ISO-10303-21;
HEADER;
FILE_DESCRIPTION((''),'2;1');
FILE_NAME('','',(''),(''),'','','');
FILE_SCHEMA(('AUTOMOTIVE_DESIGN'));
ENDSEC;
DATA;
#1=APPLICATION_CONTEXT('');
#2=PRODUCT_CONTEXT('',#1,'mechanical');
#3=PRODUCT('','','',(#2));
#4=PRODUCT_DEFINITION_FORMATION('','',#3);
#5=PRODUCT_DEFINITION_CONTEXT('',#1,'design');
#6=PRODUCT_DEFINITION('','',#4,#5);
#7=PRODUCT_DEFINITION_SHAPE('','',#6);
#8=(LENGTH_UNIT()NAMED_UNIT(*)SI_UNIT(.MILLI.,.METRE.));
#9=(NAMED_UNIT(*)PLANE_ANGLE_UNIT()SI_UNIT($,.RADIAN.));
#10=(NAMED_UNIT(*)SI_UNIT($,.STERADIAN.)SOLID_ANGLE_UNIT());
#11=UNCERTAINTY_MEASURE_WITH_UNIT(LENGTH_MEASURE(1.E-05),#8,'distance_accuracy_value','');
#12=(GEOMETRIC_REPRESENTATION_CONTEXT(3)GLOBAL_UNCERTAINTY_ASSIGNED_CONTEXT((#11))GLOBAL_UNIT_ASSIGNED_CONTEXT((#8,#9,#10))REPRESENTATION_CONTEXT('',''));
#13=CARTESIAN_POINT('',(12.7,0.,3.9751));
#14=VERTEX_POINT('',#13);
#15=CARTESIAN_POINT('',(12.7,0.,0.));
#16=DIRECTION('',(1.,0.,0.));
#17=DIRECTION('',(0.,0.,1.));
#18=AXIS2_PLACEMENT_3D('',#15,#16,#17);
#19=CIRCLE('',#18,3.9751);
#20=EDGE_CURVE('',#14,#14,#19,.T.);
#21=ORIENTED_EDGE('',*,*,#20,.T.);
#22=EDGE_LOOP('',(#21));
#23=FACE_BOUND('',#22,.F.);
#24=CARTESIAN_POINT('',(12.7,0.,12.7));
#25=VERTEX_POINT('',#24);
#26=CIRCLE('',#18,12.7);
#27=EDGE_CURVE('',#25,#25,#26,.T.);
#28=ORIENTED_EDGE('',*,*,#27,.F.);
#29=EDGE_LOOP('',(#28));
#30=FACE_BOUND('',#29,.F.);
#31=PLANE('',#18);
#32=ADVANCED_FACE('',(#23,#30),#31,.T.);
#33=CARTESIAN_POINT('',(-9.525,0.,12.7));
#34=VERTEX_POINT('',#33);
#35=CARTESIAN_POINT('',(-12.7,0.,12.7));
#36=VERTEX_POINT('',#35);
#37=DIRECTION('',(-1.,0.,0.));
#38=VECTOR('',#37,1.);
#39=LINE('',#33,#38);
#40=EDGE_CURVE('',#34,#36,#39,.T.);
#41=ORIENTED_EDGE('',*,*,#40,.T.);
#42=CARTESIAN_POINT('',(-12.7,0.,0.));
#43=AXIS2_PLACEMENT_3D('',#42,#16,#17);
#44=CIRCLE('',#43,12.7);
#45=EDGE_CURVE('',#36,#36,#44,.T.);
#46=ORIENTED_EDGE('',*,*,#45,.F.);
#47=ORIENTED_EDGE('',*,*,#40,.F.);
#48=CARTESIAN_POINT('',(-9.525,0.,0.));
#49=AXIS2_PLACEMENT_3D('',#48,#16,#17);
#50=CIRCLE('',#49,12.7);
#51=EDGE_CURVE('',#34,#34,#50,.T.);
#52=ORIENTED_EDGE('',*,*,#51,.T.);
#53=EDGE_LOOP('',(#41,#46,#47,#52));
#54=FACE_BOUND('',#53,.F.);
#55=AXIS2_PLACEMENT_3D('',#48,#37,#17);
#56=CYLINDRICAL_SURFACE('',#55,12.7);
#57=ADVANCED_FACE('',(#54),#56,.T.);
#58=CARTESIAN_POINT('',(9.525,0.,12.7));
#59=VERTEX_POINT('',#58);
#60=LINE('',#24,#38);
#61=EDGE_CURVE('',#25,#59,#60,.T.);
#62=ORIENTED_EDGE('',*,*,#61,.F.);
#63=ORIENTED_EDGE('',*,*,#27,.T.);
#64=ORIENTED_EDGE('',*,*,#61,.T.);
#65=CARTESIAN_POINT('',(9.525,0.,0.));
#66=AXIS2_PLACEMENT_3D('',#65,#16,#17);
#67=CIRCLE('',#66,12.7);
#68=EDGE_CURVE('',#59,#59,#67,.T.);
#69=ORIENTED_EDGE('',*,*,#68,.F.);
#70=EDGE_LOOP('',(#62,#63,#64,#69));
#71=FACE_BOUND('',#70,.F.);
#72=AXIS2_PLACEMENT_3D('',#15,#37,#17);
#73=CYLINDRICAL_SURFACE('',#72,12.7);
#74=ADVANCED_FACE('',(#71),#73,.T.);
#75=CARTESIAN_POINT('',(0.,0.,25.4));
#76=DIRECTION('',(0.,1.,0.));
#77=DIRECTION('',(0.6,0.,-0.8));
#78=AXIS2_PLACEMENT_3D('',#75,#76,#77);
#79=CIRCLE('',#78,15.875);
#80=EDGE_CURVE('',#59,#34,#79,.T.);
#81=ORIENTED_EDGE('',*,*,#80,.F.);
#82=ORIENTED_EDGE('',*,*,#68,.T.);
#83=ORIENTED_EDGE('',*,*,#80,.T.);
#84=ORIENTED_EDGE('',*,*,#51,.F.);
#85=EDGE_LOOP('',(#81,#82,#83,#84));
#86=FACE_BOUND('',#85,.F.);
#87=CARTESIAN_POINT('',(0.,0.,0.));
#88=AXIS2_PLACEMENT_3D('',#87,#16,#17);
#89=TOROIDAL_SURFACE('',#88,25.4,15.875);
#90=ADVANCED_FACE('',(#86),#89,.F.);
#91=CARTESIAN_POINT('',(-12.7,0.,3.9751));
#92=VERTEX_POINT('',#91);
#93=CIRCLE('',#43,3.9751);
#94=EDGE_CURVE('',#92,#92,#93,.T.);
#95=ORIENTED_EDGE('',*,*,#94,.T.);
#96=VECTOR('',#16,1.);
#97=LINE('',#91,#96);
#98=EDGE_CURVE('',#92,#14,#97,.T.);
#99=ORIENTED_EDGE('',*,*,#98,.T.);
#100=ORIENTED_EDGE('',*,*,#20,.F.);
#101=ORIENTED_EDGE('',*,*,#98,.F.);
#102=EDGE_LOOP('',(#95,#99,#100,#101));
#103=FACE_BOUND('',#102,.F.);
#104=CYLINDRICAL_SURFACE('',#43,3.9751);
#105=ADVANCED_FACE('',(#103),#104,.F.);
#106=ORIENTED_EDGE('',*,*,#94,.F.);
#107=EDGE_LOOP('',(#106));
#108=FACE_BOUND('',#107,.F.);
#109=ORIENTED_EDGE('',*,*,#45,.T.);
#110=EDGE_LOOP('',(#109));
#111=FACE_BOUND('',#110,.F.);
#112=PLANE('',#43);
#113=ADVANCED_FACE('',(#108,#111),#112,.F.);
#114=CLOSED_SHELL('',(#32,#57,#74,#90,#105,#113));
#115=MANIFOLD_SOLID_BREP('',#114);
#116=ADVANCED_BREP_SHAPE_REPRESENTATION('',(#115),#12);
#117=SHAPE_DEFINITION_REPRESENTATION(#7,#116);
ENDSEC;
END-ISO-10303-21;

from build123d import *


# Not quite as in the source:
# - a feature names something its author has since deleted; it is built from what else it names


with BuildPart() as f1:
    # F0 (on Front) → F1 (revolve)
    with BuildSketch(Plane.XZ):
        with BuildLine():
            Line((-12.7, 12.7), (-12.7, 3.9751))
            Line((-12.7, 3.9751), (12.7, 3.9751))
            Line((12.7, 3.9751), (12.7, 12.7))
            Line((12.7, 12.7), (9.525, 12.7))
            ThreePointArc((9.525, 12.7), (0, 9.525), (-9.525, 12.7))
            Line((-9.525, 12.7), (-12.7, 12.7))
        make_face()
    revolve(axis=Axis((2.2681517906, 0, 0), (1, 0, 0)))


solid = f1.part
